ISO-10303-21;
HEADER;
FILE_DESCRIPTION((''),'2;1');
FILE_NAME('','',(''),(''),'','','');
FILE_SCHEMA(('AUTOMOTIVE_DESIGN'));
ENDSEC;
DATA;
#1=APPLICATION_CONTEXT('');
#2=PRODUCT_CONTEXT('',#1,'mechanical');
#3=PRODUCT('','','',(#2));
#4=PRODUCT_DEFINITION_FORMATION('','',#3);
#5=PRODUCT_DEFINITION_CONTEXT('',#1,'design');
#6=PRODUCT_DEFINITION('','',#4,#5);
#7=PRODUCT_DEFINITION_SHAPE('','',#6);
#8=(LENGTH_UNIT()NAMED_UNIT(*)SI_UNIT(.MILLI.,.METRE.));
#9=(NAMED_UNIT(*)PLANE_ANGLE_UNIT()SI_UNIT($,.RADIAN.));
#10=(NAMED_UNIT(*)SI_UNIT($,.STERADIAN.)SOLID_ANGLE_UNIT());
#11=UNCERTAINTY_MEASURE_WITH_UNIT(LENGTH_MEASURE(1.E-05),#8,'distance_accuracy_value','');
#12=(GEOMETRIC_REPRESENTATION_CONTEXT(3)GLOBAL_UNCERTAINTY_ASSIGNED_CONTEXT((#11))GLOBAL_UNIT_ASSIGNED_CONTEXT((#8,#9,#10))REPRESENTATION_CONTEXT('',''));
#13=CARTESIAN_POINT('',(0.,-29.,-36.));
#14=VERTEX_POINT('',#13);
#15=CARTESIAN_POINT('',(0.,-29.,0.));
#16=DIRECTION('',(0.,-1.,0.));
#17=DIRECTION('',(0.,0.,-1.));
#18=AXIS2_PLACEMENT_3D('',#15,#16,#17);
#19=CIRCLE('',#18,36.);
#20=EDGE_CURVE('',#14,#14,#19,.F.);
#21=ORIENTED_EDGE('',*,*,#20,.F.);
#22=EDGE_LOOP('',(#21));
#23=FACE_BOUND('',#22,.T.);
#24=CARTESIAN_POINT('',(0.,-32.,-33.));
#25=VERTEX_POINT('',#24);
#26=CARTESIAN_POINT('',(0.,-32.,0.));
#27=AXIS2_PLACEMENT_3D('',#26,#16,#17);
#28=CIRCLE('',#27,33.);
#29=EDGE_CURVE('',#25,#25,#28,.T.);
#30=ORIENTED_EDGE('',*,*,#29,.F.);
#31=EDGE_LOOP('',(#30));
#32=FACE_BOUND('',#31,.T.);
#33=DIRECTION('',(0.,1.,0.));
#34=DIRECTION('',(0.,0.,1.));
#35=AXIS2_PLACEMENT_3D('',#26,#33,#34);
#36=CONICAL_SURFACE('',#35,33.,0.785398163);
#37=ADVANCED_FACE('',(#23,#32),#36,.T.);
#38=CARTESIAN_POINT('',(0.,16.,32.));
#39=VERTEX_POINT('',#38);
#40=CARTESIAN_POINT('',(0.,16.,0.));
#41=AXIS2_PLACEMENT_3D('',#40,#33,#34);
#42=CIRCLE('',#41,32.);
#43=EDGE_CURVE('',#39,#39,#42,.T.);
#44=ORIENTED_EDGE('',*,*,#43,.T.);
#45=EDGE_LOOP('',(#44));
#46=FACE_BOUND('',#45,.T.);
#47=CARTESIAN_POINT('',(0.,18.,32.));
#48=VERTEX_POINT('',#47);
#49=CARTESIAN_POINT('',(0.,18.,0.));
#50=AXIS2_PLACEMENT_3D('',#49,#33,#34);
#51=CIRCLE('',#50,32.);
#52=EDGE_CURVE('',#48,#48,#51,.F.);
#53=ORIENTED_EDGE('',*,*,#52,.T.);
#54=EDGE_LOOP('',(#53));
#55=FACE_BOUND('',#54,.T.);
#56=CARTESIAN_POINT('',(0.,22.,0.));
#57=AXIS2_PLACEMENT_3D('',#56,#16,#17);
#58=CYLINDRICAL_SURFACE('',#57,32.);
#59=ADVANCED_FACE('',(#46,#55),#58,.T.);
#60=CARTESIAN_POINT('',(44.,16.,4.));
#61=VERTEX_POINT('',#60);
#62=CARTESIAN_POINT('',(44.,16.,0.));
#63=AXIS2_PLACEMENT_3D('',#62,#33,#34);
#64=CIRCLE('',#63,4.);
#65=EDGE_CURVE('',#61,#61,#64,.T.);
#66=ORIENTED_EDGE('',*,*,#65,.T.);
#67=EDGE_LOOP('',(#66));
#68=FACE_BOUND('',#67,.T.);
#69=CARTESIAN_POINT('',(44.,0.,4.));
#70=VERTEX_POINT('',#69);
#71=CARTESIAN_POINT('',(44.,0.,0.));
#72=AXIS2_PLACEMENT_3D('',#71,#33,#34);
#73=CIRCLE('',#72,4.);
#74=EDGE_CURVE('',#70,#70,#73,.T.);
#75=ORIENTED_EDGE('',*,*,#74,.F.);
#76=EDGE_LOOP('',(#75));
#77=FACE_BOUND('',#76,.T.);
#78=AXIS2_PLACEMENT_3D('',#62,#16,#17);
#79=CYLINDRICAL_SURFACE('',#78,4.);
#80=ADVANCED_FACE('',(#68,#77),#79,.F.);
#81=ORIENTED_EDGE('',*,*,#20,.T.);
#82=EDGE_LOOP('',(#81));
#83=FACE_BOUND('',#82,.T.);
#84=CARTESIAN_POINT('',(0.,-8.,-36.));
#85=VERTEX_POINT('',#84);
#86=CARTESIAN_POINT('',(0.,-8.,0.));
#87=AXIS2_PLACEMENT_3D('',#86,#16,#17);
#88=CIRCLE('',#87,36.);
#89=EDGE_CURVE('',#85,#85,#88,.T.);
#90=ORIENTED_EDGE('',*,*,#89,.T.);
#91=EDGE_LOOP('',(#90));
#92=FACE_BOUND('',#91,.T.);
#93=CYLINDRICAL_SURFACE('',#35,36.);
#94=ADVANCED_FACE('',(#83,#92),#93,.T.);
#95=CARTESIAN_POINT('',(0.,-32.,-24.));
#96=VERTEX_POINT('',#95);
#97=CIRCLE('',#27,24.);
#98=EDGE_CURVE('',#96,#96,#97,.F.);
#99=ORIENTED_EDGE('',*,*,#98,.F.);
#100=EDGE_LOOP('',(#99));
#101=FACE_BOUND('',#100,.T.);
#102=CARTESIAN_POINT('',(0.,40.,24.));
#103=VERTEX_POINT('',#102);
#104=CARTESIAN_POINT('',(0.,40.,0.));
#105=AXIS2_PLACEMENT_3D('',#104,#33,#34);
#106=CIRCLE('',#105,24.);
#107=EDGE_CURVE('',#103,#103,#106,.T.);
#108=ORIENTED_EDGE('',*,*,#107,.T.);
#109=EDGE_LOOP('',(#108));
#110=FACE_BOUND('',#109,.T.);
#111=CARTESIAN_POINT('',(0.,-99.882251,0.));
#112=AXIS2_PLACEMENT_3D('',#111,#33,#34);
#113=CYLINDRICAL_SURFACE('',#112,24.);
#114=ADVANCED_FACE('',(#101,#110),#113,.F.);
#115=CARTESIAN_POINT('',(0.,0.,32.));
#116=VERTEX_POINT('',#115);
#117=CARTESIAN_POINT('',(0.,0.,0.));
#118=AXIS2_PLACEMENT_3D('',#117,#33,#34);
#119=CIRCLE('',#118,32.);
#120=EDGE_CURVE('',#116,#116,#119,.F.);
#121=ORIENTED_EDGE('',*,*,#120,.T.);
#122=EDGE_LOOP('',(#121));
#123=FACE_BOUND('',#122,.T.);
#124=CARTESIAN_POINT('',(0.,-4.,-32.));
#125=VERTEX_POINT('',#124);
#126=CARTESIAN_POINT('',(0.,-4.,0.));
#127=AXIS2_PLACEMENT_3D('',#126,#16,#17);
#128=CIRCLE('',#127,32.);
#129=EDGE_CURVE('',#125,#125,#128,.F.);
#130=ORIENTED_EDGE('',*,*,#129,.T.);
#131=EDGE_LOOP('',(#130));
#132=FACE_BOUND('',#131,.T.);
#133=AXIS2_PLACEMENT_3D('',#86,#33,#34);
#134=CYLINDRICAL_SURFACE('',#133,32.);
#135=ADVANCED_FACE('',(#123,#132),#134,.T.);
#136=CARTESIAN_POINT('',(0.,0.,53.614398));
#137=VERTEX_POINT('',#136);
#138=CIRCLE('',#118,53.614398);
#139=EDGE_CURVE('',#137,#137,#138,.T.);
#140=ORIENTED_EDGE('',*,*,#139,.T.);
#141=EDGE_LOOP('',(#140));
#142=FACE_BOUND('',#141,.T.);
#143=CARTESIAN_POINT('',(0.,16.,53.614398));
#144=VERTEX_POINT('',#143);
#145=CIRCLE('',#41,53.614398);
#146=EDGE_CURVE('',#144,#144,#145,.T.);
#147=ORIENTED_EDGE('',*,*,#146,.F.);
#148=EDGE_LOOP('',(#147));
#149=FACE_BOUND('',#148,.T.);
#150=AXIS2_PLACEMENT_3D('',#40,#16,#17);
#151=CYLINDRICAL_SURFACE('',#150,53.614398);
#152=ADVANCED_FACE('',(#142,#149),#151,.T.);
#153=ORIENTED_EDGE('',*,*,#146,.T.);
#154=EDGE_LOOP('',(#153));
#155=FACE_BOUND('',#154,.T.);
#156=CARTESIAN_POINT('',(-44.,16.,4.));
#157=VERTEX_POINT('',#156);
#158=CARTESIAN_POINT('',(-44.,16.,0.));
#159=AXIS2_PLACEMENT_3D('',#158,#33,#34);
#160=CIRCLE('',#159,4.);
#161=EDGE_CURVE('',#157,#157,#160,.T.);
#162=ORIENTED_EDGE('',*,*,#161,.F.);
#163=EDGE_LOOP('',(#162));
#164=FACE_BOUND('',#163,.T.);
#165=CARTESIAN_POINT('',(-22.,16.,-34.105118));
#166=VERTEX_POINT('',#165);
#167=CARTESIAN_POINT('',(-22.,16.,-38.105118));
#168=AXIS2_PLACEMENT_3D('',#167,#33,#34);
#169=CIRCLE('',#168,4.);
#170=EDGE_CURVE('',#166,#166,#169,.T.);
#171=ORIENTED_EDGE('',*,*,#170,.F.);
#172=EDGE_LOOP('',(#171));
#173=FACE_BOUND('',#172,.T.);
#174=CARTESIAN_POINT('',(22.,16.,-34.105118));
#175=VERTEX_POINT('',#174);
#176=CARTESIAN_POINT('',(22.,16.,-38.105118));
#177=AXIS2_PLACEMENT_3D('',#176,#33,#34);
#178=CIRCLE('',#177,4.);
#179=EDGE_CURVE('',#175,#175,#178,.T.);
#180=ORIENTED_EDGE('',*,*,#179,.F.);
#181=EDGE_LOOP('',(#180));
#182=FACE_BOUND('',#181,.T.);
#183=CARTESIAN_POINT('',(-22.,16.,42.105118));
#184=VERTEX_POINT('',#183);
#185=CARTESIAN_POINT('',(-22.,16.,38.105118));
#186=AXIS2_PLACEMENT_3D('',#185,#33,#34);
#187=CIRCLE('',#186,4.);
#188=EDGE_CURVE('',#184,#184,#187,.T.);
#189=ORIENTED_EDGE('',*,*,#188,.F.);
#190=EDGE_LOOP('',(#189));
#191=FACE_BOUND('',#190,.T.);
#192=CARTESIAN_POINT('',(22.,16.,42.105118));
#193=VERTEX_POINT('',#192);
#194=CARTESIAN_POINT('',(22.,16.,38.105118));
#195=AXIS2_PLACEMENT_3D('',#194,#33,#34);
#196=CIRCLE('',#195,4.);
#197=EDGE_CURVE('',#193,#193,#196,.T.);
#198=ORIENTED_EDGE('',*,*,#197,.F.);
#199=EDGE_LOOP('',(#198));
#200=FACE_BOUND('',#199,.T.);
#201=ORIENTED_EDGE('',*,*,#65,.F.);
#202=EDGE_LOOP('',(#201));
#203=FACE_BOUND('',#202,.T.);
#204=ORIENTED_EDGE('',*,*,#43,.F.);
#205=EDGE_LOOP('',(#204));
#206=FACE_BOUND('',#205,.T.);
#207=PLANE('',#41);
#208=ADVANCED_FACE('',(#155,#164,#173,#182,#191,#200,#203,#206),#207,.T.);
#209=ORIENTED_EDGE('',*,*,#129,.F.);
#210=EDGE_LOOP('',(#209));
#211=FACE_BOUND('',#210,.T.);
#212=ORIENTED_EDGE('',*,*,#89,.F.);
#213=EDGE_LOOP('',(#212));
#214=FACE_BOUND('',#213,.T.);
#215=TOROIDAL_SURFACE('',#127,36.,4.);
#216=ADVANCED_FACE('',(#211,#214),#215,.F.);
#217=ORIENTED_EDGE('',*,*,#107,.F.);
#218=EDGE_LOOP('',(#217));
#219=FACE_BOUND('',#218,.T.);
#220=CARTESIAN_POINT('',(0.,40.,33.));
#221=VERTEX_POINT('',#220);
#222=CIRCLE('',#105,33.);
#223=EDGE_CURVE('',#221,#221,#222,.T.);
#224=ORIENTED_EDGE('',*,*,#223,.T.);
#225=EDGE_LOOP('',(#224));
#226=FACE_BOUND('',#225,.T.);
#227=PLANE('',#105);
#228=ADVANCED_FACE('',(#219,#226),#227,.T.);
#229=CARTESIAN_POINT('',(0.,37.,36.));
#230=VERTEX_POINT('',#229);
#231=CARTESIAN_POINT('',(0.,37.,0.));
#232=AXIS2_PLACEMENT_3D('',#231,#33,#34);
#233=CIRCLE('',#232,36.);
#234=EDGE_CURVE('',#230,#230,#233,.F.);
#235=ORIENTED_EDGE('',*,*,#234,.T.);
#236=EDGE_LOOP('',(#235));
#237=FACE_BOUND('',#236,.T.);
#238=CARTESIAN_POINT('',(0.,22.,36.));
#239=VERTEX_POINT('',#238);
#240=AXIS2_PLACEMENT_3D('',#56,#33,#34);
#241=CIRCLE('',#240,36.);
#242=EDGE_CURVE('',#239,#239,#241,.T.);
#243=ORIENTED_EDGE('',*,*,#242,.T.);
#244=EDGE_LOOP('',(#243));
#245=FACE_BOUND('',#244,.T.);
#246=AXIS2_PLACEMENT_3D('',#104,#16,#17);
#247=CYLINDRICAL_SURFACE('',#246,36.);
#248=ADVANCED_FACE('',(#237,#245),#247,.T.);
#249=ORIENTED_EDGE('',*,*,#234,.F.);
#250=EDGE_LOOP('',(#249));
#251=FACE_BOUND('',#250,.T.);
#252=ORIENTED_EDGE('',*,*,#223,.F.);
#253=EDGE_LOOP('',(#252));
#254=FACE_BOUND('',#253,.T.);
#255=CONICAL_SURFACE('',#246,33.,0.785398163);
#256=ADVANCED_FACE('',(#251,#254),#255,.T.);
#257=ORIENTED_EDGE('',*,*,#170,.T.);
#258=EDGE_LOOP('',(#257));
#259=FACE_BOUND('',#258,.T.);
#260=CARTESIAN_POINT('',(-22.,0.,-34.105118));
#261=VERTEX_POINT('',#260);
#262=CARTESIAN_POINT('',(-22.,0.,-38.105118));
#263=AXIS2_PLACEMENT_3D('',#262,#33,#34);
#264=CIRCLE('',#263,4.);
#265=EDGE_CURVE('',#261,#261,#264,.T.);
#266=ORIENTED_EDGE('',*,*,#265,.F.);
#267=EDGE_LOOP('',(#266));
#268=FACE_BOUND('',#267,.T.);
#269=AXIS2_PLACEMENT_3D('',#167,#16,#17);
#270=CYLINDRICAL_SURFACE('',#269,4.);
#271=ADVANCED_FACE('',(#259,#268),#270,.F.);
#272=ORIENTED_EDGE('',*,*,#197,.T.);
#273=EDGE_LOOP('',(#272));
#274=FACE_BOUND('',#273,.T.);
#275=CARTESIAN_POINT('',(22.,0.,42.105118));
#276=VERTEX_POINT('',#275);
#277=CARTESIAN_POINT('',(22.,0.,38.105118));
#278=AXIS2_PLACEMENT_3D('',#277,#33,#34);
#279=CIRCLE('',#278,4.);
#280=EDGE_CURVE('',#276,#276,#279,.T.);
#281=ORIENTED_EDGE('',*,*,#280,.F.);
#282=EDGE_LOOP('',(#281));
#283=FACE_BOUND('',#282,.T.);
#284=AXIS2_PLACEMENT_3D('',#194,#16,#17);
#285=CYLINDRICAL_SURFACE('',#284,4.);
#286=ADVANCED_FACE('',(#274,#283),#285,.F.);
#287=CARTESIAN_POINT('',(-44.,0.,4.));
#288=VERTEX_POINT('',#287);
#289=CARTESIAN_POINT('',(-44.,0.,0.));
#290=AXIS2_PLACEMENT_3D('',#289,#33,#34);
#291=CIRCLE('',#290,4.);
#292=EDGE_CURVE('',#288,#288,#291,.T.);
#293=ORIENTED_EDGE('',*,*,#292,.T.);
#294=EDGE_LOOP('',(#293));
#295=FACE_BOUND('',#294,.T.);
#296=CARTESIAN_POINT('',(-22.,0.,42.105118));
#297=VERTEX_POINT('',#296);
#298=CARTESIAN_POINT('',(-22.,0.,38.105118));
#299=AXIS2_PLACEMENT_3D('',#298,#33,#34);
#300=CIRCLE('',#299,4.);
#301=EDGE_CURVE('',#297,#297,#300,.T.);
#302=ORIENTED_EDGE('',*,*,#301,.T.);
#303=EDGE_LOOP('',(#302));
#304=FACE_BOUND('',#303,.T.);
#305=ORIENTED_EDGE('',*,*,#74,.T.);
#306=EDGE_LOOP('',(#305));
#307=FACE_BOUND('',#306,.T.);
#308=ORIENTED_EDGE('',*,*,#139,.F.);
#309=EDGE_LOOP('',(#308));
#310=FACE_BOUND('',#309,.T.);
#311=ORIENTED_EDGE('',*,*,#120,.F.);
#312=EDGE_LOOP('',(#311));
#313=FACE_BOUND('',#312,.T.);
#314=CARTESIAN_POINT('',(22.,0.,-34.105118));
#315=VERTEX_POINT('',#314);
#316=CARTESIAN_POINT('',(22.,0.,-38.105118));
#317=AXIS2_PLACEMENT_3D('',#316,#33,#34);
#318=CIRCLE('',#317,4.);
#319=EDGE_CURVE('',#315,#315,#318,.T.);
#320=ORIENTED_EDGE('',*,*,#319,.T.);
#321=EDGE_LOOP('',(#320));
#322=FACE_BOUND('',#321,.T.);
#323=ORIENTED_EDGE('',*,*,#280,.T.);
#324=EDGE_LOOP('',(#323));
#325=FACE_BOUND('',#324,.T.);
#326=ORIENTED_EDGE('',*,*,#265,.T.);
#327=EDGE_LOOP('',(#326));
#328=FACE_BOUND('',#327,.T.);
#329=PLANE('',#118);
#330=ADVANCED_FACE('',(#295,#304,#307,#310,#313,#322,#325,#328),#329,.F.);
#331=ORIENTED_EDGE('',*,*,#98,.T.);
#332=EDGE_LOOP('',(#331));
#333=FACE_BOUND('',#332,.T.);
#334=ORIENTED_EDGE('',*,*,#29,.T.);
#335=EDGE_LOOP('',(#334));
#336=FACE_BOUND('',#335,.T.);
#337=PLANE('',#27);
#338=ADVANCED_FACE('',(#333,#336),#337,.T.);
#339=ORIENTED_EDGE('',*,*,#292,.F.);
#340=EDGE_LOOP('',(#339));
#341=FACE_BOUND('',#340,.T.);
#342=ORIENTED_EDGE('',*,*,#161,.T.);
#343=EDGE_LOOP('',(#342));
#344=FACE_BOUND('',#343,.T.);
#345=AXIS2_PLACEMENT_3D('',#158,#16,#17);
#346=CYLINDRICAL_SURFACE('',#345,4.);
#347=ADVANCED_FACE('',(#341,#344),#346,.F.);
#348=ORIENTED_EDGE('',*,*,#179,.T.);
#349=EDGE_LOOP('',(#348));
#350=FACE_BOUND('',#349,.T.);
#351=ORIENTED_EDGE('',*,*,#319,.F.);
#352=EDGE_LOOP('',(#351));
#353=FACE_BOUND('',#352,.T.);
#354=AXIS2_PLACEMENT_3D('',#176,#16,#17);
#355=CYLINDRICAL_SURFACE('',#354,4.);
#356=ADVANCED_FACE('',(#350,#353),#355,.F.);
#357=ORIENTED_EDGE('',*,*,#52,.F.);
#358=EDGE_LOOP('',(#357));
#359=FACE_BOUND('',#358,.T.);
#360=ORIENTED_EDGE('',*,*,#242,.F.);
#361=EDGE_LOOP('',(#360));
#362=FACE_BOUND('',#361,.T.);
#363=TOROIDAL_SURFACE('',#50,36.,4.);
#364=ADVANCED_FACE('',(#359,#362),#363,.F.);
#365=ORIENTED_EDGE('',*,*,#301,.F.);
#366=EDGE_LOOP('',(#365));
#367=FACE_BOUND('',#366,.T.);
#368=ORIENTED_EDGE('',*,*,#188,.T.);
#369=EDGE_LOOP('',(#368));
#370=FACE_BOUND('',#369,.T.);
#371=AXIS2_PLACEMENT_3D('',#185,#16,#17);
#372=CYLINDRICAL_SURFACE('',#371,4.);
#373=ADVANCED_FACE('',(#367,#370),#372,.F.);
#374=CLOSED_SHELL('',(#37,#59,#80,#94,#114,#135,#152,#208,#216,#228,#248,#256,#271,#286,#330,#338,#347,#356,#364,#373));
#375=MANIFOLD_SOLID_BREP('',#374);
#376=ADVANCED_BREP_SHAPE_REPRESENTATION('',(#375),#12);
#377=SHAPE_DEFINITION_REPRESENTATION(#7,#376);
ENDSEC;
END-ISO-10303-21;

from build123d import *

# Parameters (mm, degrees)
SKETCH1_R           = 53.614398493
SKETCH1_R_2         = 4
BOSS_EXTRUDE1_DEPTH = 16
SKETCH3_R           = 32
BOSS_EXTRUDE2_DEPTH = 6
SKETCH4_R           = 36
BOSS_EXTRUDE3_DEPTH = 18
BOSS_EXTRUDE4_START = 8
SKETCH5_R           = 32
BOSS_EXTRUDE4_DEPTH = 8
BOSS_EXTRUDE5_START = 24
SKETCH6_R           = 36
BOSS_EXTRUDE5_DEPTH = 24
FILLET2_R           = 4
CHAMFER2_SIZE       = 3
SKETCH7_R           = 24
CUT_EXTRUDE1_DEPTH  = 72


with BuildPart() as part:
    # Sketch1 → Boss-Extrude1 (new body)
    with BuildSketch(Plane(origin=(0, 0, 0), x_dir=(1, 0, 0), z_dir=(0, 1, 0))):
        with Locations(Location((0, 0, 0), (0, 0, 270))):
            Circle(SKETCH1_R)
        with Locations(Location((-44, 0, 0), (0, 0, 270))):
            Circle(SKETCH1_R_2, mode=Mode.SUBTRACT)
        with Locations(Location((-22, 38.105117767, 0), (0, 0, 270))):
            Circle(SKETCH1_R_2, mode=Mode.SUBTRACT)
        with Locations(Location((22, 38.105117767, 0), (0, 0, 270))):
            Circle(SKETCH1_R_2, mode=Mode.SUBTRACT)
        with Locations(Location((44, 0, 0), (0, 0, 270))):
            Circle(SKETCH1_R_2, mode=Mode.SUBTRACT)
        with Locations(Location((22, -38.105117767, 0), (0, 0, 270))):
            Circle(SKETCH1_R_2, mode=Mode.SUBTRACT)
        with Locations(Location((-22, -38.105117767, 0), (0, 0, 270))):
            Circle(SKETCH1_R_2, mode=Mode.SUBTRACT)
    extrude(amount=BOSS_EXTRUDE1_DEPTH)

    # Sketch3 → Boss-Extrude2 (add)
    with BuildSketch(Plane(origin=(0, 16, 0), x_dir=(1, 0, 0), z_dir=(0, 1, 0))):
        with Locations(Location((0, 0, 0), (0, 0, 270))):
            Circle(SKETCH3_R)
    extrude(amount=BOSS_EXTRUDE2_DEPTH)

    # Sketch4 → Boss-Extrude3 (add)
    with BuildSketch(Plane(origin=(0, 22, 0), x_dir=(1, 0, 0), z_dir=(0, 1, 0))):
        with Locations(Location((0, 0, 0), (0, 0, 270))):
            Circle(SKETCH4_R)
    extrude(amount=BOSS_EXTRUDE3_DEPTH)

    # Sketch5 → Boss-Extrude4 (add)
    with BuildSketch(Plane.XZ.offset(BOSS_EXTRUDE4_START)):
        with Locations(Location((0, 0, 0), (0, 0, 90))):
            Circle(SKETCH5_R)
    extrude(amount=-BOSS_EXTRUDE4_DEPTH)

    # Sketch6 → Boss-Extrude5 (add)
    with BuildSketch(Plane.XZ.offset(8).offset(BOSS_EXTRUDE5_START)):
        with Locations(Location((0, 0, 0), (0, 0, 90))):
            Circle(SKETCH6_R)
    extrude(amount=-BOSS_EXTRUDE5_DEPTH)

    # Fillet2
    fillet2_edges = [part.edges().sort_by_distance(p)[0] for p in [
        (0, 22, -32),
        (0, -8, -32),
    ]]
    fillet(fillet2_edges, radius=FILLET2_R - 0.0001)  # a hair under: the kernel refuses the full size

    # Chamfer2
    chamfer2_edges = [part.edges().sort_by_distance(p)[0] for p in [
        (0, 40, -36),
        (0, -32, -36),
    ]]
    chamfer(chamfer2_edges, length=CHAMFER2_SIZE)

    # Sketch7 → Cut-Extrude1 (cut)
    with BuildSketch(Plane(origin=(0, 40, 0), x_dir=(1, 0, 0), z_dir=(0, 1, 0))):
        with Locations(Location((0, 0, 0), (0, 0, 270))):
            Circle(SKETCH7_R)
    extrude(amount=-CUT_EXTRUDE1_DEPTH, mode=Mode.SUBTRACT)


solid = part.part
